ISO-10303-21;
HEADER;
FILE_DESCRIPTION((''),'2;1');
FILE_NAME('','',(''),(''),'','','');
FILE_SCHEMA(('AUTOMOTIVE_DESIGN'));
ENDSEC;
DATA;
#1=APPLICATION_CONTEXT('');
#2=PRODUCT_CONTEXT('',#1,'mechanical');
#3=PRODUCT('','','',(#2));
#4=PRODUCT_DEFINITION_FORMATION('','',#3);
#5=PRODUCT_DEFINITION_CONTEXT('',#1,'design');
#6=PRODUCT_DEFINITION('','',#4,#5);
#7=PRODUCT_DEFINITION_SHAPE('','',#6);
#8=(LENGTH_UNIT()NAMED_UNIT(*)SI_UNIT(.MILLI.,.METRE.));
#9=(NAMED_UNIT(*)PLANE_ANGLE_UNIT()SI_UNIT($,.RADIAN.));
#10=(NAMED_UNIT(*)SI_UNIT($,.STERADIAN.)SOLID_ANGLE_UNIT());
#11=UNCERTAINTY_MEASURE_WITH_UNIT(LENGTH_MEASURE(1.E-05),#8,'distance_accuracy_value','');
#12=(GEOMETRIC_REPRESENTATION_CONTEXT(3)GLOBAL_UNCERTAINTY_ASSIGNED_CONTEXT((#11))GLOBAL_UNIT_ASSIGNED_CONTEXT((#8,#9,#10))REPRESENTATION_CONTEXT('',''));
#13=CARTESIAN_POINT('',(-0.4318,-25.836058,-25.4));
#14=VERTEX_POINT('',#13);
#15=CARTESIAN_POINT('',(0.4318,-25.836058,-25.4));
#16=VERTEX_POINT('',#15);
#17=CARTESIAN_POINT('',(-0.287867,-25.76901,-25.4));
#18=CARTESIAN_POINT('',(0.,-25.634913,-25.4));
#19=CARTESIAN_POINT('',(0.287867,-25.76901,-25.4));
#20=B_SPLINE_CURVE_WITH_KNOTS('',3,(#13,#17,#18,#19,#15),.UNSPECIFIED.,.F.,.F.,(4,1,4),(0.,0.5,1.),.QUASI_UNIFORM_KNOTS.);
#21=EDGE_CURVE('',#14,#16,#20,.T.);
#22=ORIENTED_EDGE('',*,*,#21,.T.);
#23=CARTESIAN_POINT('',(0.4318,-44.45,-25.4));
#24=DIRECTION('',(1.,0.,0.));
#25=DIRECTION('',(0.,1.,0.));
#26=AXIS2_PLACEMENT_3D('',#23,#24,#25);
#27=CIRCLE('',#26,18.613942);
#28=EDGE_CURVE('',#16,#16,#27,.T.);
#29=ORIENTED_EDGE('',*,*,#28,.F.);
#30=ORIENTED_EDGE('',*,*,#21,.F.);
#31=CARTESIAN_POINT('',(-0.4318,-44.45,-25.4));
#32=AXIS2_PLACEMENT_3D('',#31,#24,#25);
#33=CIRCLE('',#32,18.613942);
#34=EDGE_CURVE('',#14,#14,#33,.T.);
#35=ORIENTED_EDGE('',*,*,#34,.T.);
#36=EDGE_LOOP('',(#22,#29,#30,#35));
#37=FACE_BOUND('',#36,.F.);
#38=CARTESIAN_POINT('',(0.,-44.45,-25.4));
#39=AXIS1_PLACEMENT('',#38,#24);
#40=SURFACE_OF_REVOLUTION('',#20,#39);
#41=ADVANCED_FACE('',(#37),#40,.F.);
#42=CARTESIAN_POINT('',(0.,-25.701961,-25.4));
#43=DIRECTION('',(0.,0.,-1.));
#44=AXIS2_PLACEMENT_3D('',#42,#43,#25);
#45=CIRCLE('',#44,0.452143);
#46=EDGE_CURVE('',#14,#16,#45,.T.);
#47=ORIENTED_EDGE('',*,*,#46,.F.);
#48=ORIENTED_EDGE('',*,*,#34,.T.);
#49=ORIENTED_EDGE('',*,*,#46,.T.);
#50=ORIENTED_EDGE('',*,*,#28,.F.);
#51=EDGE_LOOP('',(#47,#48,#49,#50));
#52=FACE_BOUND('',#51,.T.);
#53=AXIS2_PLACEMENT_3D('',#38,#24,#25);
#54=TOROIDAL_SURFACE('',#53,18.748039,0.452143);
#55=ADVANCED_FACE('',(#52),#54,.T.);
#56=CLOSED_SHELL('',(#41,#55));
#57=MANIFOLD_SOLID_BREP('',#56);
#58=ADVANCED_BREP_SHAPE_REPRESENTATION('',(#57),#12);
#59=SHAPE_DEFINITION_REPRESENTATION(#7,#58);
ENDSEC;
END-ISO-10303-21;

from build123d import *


# Not quite as in the source:
# - a feature names something its author has since deleted; it is built from what else it names
# - the program builds the solid bodies; features that only make, move or delete a surface that nothing else refers to are left out


with BuildPart() as f3:
    # F3: sweep along a path in F0
    with BuildLine(Plane.YZ) as f3_path:
        CenterArc((-44.45, -25.4), 19.05, 0, 360)
    # F2 (on offset) → F3 (sweep)
    with BuildSketch(Plane.XZ.offset(44.45)):
        with BuildLine():
            add(Edge.make_bspline(
                [(-0.4318, -6.7860578887), (-0.2878666667, -6.7190095517), (0, -6.5849128778), (0.2878666667, -6.7190095517), (0.4318, -6.7860578887)],
                knots=[0, 0, 0, 0, 0.5, 1, 1, 1, 1], degree=3))
            ThreePointArc((0.4318, -6.7860578887), (0, -6.1998183635), (-0.4318, -6.7860578887))
        make_face()
    sweep(path=f3_path.line)


solid = f3.part
